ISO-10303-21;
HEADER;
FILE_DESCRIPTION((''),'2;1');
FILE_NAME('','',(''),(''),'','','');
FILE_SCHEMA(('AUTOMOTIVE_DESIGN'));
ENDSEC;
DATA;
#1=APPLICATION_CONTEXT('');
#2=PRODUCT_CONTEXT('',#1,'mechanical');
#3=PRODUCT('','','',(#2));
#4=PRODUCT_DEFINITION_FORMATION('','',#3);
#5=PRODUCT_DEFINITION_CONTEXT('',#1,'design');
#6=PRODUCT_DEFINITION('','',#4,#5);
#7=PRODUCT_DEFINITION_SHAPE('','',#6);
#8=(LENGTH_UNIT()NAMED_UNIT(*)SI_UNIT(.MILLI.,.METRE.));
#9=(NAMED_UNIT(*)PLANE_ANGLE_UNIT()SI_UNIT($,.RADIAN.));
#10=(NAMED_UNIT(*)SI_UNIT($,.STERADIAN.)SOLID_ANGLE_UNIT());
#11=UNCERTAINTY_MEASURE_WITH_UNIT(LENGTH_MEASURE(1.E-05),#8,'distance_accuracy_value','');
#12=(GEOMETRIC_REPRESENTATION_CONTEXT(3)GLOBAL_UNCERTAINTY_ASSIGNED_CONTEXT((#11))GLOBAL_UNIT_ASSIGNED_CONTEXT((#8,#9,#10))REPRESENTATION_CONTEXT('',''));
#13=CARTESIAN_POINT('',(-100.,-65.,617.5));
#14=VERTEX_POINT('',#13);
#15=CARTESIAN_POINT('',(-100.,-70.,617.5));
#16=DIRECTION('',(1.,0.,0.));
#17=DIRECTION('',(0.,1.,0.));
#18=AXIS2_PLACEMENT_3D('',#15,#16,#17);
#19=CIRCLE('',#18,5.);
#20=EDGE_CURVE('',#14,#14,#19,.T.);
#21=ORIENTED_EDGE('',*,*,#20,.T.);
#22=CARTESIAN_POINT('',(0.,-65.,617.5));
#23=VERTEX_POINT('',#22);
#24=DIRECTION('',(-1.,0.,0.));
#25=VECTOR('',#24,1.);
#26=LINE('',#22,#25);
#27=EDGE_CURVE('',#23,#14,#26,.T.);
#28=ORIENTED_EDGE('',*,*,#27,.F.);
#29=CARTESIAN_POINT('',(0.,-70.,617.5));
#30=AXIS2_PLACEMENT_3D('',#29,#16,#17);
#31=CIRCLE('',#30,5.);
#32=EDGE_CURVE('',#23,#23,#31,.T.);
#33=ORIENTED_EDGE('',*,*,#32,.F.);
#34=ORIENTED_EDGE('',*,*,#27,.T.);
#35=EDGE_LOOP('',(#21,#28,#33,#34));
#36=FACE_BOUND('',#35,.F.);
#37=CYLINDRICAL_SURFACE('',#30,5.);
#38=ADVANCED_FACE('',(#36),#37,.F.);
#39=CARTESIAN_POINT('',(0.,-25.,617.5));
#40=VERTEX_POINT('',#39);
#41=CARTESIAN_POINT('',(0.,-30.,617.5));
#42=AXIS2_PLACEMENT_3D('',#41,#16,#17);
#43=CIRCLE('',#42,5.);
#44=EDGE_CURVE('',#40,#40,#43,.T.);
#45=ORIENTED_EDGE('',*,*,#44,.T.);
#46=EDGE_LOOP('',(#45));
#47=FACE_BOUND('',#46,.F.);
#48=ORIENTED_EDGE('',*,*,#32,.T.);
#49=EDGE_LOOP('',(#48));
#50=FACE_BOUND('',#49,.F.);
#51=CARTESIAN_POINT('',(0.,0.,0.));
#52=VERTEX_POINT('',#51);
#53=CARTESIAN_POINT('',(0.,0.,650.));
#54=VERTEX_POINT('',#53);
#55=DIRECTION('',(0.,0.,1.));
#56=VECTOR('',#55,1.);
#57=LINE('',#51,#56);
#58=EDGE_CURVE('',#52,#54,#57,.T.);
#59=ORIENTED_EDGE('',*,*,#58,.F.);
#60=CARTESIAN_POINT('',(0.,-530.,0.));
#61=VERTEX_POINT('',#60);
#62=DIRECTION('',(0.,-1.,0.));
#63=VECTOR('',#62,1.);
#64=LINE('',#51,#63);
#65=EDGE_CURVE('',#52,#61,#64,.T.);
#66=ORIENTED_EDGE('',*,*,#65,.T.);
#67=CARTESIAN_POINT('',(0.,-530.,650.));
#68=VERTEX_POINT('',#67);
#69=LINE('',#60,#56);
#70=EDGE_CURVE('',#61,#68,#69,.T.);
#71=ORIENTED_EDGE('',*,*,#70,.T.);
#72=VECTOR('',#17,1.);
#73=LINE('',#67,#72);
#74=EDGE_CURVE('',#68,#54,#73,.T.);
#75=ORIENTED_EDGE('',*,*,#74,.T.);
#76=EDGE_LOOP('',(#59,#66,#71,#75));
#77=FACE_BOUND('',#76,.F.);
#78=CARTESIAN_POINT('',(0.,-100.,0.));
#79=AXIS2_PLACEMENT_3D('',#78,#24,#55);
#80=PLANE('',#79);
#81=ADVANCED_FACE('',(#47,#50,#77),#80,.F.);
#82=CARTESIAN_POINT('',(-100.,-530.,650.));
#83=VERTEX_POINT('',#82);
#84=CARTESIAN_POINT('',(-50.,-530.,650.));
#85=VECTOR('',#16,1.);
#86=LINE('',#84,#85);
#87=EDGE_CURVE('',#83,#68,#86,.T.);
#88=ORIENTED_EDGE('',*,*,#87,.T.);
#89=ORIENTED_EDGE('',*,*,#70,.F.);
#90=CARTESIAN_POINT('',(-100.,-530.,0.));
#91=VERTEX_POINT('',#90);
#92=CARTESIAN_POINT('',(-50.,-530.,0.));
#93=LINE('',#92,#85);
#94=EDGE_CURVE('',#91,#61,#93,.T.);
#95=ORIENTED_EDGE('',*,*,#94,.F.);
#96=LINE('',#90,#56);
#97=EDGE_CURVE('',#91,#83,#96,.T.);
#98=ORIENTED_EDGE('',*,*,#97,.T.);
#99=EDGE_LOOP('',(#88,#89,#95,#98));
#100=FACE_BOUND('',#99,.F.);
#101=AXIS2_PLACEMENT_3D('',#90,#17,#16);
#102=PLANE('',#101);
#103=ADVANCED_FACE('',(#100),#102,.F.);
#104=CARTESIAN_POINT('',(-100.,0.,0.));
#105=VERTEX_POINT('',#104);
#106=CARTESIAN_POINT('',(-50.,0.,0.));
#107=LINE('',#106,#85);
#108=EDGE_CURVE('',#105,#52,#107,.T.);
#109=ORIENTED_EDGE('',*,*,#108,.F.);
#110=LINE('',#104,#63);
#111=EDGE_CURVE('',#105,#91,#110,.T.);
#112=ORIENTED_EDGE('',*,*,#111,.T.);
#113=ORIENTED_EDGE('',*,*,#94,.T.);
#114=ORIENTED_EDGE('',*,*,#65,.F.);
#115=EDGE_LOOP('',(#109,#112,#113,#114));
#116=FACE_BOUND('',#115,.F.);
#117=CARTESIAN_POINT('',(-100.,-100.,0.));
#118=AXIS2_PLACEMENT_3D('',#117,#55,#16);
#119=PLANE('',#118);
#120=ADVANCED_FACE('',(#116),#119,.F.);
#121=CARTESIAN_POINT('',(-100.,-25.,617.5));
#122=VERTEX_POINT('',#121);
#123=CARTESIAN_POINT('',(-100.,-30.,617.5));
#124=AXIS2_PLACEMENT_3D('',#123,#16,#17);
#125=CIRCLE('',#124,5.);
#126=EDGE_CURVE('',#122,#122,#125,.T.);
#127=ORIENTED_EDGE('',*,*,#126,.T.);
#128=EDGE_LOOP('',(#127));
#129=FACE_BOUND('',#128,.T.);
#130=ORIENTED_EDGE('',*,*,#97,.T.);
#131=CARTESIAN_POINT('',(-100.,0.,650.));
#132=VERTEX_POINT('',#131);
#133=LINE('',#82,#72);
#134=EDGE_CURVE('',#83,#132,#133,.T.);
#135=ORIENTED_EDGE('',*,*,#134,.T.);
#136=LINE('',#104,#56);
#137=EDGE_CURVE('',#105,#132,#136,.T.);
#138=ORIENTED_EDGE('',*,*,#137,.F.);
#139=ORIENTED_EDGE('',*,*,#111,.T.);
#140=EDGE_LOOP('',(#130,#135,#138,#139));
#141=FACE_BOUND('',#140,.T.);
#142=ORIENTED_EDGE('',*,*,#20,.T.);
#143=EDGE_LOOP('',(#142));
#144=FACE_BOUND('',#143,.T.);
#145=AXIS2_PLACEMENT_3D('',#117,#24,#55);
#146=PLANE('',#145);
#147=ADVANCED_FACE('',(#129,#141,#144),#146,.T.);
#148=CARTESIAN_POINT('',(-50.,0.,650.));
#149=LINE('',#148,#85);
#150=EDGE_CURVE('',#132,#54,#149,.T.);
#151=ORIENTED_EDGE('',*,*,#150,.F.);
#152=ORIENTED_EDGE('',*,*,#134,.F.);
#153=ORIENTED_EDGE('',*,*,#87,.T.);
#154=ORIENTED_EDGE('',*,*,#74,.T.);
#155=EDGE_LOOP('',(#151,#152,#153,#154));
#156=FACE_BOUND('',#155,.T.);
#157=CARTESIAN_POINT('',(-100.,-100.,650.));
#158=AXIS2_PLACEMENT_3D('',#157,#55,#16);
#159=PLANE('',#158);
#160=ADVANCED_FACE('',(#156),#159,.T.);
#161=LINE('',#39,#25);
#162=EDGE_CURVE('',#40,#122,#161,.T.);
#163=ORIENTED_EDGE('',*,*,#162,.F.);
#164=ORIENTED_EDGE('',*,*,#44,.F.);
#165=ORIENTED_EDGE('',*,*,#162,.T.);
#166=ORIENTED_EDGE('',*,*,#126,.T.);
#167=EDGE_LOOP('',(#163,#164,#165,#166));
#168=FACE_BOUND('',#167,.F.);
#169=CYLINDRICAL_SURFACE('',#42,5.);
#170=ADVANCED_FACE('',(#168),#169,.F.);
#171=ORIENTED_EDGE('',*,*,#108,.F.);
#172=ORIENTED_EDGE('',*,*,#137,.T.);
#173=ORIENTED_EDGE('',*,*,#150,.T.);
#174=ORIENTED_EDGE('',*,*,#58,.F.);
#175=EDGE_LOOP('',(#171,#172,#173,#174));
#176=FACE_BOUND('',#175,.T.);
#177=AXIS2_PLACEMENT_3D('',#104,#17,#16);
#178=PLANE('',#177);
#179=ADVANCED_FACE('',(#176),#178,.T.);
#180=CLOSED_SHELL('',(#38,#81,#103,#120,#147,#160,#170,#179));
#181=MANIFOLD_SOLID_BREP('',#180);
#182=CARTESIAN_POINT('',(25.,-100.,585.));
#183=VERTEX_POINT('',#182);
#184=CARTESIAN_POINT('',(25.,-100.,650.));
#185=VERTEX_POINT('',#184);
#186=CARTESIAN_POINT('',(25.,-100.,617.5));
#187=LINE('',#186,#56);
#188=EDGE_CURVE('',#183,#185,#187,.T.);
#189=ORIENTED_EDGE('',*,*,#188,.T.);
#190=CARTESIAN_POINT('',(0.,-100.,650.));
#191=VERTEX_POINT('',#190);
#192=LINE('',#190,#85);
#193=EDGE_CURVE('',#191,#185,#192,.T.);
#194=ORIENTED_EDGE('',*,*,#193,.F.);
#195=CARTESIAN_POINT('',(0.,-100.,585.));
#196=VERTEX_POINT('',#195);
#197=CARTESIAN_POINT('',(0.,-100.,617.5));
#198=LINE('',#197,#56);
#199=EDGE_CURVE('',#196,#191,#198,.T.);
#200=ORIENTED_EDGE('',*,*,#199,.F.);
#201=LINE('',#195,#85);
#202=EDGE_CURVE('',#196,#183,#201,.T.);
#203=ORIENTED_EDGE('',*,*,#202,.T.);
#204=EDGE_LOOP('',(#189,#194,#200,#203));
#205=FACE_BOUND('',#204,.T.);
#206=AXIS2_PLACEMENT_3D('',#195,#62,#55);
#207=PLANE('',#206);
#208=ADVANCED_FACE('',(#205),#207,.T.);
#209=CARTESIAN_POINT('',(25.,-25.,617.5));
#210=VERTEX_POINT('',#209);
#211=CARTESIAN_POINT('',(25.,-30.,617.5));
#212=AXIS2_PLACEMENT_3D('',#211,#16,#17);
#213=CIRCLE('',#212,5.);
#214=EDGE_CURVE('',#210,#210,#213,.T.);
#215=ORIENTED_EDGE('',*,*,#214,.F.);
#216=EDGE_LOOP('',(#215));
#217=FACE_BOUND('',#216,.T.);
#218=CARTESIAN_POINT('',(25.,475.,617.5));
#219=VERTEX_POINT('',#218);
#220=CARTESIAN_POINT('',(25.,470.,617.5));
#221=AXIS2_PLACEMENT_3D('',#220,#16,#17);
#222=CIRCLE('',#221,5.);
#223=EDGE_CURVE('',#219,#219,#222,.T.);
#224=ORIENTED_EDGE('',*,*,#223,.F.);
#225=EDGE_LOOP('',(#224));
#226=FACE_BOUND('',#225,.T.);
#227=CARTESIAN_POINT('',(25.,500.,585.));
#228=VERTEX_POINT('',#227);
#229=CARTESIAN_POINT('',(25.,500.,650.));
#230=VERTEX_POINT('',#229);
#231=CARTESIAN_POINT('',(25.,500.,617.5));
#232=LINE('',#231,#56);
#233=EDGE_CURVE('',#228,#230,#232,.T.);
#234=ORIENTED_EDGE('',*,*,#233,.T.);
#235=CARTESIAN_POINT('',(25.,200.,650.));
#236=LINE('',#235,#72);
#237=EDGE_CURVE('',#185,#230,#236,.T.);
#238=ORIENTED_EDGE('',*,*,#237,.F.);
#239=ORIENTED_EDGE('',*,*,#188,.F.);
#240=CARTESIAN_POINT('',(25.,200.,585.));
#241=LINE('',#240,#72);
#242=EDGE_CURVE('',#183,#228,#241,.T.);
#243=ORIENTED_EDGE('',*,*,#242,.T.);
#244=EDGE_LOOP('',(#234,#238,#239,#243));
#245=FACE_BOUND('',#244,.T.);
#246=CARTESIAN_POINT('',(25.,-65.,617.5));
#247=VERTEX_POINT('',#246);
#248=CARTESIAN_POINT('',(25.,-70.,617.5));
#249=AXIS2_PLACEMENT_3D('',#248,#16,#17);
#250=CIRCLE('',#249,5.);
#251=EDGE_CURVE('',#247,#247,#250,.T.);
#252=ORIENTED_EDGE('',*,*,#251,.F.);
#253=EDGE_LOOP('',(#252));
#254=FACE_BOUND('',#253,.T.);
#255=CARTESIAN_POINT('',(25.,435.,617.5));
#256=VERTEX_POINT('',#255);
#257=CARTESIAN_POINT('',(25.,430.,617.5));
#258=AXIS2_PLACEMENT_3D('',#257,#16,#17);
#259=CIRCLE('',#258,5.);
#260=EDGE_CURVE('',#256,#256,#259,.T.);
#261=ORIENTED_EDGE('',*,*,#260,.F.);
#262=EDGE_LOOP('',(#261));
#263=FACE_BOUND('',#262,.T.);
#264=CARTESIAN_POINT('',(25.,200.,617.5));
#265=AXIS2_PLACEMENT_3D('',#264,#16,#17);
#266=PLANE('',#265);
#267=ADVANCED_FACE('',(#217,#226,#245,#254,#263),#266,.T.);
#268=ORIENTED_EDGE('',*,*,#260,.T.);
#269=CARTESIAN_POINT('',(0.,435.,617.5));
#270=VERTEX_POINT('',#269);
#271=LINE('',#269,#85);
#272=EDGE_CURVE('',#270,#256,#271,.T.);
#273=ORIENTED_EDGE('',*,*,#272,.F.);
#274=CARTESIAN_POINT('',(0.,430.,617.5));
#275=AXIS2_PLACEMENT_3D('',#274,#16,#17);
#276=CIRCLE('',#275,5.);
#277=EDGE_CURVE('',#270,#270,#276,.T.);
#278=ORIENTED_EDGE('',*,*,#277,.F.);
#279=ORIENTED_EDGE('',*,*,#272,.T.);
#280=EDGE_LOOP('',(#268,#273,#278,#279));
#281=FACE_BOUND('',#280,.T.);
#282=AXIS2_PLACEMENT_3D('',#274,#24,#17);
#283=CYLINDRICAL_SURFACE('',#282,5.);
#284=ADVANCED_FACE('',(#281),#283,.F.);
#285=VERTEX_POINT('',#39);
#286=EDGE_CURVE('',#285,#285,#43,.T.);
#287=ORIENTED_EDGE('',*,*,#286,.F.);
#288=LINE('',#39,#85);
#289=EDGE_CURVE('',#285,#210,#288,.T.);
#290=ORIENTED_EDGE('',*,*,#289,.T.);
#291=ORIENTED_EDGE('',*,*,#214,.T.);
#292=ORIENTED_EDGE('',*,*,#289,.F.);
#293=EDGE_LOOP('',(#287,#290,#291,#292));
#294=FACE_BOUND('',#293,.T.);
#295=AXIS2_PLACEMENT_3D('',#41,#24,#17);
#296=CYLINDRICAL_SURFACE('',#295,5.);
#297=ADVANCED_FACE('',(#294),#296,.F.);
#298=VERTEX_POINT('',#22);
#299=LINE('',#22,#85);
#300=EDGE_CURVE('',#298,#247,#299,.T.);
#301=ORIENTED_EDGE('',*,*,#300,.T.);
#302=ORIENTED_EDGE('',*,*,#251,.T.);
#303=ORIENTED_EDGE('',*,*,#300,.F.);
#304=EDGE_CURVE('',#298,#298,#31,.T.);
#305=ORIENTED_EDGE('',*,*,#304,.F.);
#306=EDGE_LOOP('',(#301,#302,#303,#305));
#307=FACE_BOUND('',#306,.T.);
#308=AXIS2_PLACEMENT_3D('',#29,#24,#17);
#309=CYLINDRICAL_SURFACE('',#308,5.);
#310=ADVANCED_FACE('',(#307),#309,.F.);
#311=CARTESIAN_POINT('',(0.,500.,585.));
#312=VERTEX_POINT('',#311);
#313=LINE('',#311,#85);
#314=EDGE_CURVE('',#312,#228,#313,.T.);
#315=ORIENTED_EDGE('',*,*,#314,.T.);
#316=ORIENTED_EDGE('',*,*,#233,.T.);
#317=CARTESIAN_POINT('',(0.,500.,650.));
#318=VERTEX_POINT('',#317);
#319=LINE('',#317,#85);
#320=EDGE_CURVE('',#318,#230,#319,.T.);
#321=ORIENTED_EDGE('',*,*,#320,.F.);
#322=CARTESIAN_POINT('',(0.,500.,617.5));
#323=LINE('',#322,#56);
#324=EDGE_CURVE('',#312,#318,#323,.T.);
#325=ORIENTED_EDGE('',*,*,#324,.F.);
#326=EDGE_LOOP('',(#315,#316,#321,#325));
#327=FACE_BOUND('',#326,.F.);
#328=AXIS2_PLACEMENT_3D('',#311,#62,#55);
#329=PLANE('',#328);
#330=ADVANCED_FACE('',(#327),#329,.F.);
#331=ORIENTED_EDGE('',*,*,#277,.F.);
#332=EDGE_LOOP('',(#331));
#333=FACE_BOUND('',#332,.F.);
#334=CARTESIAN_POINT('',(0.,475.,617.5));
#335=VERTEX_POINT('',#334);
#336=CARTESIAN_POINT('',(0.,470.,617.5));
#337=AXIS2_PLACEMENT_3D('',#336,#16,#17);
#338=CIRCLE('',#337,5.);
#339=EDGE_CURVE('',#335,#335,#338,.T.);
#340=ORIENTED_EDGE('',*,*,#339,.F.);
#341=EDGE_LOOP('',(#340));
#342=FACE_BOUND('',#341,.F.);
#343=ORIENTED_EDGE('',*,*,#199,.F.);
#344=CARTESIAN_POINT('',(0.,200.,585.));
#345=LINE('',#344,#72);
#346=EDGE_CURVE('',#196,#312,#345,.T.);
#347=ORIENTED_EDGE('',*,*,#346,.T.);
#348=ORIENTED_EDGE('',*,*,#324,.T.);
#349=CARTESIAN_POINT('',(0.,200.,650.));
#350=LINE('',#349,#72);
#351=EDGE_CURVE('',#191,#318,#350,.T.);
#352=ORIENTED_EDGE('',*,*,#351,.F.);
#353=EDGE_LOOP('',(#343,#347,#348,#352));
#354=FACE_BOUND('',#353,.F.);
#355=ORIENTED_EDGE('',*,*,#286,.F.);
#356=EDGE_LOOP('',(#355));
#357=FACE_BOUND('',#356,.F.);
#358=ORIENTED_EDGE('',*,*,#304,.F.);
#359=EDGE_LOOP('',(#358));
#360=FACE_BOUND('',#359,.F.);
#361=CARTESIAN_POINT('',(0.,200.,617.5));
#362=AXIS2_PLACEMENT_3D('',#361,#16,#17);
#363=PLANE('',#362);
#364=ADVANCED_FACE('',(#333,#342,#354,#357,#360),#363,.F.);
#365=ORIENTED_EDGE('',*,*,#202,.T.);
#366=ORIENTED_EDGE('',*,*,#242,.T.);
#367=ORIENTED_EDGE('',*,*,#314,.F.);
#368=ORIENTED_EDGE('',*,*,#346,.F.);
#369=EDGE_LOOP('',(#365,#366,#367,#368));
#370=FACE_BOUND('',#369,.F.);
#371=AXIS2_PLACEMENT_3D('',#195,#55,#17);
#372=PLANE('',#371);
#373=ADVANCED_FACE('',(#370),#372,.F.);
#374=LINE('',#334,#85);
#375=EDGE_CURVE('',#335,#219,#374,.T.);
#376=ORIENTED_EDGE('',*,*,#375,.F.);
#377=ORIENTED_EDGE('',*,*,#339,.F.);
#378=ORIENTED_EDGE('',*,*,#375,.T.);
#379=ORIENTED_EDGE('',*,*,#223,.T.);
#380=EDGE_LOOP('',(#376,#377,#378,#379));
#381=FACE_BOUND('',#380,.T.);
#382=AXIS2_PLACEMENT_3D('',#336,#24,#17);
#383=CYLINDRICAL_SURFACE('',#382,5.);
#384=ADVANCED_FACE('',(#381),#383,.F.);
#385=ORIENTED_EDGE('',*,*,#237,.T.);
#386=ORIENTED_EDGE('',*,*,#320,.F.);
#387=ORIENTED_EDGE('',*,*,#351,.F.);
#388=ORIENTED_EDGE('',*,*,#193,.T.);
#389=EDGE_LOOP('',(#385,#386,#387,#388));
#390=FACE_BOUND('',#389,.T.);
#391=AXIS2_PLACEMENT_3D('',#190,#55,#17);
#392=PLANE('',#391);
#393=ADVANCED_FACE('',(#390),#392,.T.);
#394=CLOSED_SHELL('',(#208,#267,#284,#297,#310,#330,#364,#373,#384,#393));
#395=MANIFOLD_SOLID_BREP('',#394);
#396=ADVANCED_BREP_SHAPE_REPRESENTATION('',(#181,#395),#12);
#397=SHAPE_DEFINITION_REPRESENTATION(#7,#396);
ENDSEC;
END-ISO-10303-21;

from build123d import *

# Parameters (mm, degrees)
F0_W     = 100
F0_H     = 100
F1_DEPTH = 650
F2_R     = 5
F3_DEPTH = 100.001
F4_W     = 600
F4_H     = 65
F4_R     = 5
F5_DEPTH = 25
F6_DEPTH = 430


with BuildPart() as f1:
    # F0 (on Top) → F1 (new body)
    with BuildSketch(Plane.XY):
        with Locations((-50, -50)):
            Rectangle(F0_W, F0_H)
    extrude(amount=F1_DEPTH)

    # F2 (on face) → F3 (cut, through all)
    with BuildSketch(Plane.YZ):
        with Locations((-70, 617.5)):
            Circle(F2_R)
        with Locations((-30, 617.5)):
            Circle(F2_R)
    extrude(amount=-F3_DEPTH, mode=Mode.SUBTRACT)

    # F6 (add): a face of the model
    f6_faces = [f1.faces().sort_by_distance(p)[0] for p in [
        (-50, -100, 325),
    ]]
    extrude(f6_faces, amount=F6_DEPTH)


with BuildPart() as f5:
    # F4 (on Right) → F5 (new body)
    with BuildSketch(Plane.YZ):
        with Locations((200, 617.5)):
            Rectangle(F4_W, F4_H)
        with Locations((-70, 617.5)):
            Circle(F4_R, mode=Mode.SUBTRACT)
        with Locations((-30, 617.5)):
            Circle(F4_R, mode=Mode.SUBTRACT)
        with Locations((430, 617.5)):
            Circle(F4_R, mode=Mode.SUBTRACT)
        with Locations((470, 617.5)):
            Circle(F4_R, mode=Mode.SUBTRACT)
    extrude(amount=F5_DEPTH)


solid = Compound([f1.part, f5.part])
